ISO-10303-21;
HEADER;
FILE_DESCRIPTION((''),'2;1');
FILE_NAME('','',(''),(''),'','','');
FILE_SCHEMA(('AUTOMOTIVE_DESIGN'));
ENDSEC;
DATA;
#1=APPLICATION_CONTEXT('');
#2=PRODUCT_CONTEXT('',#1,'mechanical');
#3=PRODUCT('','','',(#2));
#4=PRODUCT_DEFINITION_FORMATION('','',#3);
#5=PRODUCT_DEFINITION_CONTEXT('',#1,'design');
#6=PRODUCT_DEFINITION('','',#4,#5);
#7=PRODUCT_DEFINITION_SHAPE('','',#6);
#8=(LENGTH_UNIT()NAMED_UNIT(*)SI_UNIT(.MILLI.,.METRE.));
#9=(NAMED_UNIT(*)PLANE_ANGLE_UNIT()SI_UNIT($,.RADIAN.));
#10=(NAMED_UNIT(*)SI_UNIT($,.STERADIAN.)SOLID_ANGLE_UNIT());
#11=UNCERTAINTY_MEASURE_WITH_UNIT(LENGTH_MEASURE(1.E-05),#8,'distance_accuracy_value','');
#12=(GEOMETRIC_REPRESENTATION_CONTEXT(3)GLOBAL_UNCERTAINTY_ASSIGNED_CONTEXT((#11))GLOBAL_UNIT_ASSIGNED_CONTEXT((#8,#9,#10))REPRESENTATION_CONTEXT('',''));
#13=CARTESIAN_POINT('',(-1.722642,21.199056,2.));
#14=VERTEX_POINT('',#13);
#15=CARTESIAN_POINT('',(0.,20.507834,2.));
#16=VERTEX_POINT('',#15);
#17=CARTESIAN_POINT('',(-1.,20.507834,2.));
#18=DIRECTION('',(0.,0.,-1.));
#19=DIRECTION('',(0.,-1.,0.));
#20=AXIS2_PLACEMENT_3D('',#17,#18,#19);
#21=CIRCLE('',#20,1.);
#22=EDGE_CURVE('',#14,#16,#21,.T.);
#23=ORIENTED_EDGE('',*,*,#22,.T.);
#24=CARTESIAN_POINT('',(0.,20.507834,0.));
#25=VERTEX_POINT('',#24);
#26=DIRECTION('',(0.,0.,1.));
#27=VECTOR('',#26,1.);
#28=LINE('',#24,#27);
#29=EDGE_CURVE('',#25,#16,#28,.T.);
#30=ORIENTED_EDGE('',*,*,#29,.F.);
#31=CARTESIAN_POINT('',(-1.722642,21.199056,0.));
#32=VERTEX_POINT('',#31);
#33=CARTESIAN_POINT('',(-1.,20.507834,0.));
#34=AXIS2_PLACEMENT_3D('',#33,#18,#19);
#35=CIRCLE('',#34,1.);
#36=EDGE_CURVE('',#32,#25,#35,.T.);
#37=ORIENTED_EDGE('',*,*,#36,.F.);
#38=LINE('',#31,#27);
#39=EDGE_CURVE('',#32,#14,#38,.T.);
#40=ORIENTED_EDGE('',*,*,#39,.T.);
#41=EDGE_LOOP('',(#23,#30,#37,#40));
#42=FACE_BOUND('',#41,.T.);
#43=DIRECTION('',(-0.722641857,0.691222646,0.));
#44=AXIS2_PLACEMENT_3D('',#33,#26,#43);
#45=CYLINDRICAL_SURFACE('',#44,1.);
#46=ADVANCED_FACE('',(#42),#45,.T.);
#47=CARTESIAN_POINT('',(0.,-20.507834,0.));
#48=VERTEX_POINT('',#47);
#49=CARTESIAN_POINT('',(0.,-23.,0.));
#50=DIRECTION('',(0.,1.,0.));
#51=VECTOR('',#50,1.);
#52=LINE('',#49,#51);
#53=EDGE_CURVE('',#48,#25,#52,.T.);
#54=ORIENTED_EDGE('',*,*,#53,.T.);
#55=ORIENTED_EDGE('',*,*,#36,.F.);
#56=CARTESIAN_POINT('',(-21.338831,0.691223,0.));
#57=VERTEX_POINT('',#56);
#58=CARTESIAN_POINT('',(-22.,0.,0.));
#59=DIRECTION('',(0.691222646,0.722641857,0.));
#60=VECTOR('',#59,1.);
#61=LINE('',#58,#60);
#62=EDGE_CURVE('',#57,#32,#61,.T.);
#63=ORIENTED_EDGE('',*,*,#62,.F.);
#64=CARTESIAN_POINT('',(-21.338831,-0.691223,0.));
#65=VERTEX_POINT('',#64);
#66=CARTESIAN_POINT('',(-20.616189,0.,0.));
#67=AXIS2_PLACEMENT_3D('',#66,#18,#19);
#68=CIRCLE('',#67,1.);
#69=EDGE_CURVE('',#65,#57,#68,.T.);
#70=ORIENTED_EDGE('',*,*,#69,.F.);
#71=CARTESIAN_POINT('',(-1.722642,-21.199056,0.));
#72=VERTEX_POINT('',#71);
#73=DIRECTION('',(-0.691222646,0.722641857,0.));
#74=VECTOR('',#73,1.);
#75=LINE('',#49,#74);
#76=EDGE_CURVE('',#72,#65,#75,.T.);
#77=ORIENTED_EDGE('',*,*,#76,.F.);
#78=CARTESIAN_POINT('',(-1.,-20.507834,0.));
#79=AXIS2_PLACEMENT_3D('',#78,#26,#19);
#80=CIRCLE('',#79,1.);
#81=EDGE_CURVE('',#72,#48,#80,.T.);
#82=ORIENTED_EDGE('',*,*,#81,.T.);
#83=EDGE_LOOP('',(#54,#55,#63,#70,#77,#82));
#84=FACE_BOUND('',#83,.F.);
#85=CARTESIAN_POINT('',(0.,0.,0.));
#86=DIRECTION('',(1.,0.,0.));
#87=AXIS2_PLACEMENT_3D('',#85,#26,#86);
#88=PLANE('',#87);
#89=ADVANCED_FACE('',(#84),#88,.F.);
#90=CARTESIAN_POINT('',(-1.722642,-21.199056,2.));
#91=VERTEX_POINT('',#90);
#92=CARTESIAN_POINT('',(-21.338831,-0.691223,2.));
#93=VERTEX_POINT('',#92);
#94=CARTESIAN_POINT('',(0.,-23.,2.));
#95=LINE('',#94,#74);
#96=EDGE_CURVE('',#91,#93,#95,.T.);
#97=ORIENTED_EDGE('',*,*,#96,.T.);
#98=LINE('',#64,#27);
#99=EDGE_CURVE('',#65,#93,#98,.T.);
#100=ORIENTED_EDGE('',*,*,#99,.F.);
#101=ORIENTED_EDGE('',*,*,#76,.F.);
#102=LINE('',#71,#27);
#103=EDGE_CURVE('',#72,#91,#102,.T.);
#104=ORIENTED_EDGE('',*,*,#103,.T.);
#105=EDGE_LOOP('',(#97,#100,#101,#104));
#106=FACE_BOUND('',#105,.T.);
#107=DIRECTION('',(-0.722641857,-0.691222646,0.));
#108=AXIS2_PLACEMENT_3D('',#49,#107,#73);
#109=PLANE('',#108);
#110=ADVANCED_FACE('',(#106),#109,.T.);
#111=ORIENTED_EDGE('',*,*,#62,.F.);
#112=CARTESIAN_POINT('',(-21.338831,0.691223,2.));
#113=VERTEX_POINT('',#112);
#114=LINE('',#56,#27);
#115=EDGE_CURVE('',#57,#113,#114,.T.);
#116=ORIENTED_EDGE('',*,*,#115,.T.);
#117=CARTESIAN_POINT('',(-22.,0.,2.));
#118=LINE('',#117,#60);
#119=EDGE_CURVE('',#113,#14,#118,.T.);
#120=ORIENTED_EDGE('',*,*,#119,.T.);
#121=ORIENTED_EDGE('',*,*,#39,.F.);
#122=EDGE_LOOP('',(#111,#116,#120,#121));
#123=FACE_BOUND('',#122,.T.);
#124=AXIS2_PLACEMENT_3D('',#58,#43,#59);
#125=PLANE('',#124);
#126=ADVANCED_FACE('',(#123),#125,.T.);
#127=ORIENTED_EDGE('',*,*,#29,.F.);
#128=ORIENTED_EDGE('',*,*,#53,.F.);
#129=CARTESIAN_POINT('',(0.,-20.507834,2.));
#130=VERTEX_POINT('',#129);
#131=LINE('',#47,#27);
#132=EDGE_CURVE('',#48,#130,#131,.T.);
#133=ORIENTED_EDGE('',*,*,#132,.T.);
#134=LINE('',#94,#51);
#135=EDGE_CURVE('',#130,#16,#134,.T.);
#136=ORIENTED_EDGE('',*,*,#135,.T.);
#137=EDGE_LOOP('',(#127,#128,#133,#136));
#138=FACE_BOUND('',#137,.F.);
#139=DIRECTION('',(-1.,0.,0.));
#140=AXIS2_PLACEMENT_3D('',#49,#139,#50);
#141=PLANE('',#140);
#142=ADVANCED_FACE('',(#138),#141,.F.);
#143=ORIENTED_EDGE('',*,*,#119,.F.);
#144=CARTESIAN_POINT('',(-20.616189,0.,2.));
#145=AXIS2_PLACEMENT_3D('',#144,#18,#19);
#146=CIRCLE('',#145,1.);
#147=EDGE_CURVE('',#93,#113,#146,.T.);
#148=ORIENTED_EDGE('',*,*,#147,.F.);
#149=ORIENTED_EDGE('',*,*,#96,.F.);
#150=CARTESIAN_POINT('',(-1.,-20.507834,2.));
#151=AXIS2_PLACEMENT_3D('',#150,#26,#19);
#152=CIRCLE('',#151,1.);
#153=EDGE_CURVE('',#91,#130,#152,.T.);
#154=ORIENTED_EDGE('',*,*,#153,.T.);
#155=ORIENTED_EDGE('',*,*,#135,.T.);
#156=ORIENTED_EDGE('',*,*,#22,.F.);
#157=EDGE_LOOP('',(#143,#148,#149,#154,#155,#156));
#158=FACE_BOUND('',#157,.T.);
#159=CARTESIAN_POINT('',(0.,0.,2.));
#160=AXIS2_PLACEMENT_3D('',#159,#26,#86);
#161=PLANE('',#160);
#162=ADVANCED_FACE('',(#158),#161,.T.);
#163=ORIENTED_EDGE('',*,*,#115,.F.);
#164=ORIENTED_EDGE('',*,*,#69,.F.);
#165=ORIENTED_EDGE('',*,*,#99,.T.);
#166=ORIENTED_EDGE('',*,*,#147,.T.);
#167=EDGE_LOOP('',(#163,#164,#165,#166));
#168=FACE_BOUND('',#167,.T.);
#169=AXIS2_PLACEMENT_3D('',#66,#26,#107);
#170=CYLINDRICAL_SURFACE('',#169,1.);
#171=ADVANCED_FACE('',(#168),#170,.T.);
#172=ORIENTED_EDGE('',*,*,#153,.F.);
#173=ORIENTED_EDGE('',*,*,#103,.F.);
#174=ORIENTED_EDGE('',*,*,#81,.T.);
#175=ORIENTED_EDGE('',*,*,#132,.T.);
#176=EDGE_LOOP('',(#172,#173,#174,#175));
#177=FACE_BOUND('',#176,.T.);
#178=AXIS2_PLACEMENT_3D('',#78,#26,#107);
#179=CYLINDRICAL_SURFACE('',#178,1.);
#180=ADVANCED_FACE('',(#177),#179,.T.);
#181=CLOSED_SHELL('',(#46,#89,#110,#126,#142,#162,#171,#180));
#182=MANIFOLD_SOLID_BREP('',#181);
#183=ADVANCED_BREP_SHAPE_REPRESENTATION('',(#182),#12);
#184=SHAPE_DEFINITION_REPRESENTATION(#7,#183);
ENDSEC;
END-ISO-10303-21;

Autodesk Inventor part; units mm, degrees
ref_plane "YZ Plane" through (0, 0, 0) normal (1, 0, 0) x (0, 1, 0)
ref_plane "XZ Plane" through (0, 0, 0) normal (0, 1, 0) x (-1, 0, 0)
ref_plane "XY Plane" through (0, 0, 0) normal (0, 0, 1) x (1, 0, 0)
sketch "Sketch1" plane through (0, 0, 0) normal (0, 0, 1) x (1, 0, 0)
  line L0 (0, -23) -> (0, 23)
  line L1 (0, -23) -> (-22, 0)
  line L2 (-22, 0) -> (0, 23)
  point P0 (0, 0)
  point P1 (0, 0)
  point P2 (0, 0)
  dimension "d1" = 46
  dimension "d9" = 22
extrude "Plate1" add sketch "Sketch1" along normal blind 2
fillet "Corner Round2" radius 1 3 edges at (0, -23, 1) (-22, 0, 1) (0, 23, 1)
equation "\"d2\" = Thickness"
equation "\"BendReliefWidth\" = Thickness"
equation "\"BendReliefDepth\" = 0.5 * Thickness"
equation "\"CornerReliefSize\" = 4 * Thickness"
equation "\"MinimumRemnant\" = 2 * Thickness"
equation "\"TransitionRadius\" = BendRadius"
equation "\"JacobiRadiusSize\" = BendRadius"
equation "\"GapSize\" = Thickness"
equation "\"Thickness\" = 2"
equation "\"BendRadius\" = 2.75"
properties part number "MNT-CDF-605 CAP" material "Stainless Steel"
